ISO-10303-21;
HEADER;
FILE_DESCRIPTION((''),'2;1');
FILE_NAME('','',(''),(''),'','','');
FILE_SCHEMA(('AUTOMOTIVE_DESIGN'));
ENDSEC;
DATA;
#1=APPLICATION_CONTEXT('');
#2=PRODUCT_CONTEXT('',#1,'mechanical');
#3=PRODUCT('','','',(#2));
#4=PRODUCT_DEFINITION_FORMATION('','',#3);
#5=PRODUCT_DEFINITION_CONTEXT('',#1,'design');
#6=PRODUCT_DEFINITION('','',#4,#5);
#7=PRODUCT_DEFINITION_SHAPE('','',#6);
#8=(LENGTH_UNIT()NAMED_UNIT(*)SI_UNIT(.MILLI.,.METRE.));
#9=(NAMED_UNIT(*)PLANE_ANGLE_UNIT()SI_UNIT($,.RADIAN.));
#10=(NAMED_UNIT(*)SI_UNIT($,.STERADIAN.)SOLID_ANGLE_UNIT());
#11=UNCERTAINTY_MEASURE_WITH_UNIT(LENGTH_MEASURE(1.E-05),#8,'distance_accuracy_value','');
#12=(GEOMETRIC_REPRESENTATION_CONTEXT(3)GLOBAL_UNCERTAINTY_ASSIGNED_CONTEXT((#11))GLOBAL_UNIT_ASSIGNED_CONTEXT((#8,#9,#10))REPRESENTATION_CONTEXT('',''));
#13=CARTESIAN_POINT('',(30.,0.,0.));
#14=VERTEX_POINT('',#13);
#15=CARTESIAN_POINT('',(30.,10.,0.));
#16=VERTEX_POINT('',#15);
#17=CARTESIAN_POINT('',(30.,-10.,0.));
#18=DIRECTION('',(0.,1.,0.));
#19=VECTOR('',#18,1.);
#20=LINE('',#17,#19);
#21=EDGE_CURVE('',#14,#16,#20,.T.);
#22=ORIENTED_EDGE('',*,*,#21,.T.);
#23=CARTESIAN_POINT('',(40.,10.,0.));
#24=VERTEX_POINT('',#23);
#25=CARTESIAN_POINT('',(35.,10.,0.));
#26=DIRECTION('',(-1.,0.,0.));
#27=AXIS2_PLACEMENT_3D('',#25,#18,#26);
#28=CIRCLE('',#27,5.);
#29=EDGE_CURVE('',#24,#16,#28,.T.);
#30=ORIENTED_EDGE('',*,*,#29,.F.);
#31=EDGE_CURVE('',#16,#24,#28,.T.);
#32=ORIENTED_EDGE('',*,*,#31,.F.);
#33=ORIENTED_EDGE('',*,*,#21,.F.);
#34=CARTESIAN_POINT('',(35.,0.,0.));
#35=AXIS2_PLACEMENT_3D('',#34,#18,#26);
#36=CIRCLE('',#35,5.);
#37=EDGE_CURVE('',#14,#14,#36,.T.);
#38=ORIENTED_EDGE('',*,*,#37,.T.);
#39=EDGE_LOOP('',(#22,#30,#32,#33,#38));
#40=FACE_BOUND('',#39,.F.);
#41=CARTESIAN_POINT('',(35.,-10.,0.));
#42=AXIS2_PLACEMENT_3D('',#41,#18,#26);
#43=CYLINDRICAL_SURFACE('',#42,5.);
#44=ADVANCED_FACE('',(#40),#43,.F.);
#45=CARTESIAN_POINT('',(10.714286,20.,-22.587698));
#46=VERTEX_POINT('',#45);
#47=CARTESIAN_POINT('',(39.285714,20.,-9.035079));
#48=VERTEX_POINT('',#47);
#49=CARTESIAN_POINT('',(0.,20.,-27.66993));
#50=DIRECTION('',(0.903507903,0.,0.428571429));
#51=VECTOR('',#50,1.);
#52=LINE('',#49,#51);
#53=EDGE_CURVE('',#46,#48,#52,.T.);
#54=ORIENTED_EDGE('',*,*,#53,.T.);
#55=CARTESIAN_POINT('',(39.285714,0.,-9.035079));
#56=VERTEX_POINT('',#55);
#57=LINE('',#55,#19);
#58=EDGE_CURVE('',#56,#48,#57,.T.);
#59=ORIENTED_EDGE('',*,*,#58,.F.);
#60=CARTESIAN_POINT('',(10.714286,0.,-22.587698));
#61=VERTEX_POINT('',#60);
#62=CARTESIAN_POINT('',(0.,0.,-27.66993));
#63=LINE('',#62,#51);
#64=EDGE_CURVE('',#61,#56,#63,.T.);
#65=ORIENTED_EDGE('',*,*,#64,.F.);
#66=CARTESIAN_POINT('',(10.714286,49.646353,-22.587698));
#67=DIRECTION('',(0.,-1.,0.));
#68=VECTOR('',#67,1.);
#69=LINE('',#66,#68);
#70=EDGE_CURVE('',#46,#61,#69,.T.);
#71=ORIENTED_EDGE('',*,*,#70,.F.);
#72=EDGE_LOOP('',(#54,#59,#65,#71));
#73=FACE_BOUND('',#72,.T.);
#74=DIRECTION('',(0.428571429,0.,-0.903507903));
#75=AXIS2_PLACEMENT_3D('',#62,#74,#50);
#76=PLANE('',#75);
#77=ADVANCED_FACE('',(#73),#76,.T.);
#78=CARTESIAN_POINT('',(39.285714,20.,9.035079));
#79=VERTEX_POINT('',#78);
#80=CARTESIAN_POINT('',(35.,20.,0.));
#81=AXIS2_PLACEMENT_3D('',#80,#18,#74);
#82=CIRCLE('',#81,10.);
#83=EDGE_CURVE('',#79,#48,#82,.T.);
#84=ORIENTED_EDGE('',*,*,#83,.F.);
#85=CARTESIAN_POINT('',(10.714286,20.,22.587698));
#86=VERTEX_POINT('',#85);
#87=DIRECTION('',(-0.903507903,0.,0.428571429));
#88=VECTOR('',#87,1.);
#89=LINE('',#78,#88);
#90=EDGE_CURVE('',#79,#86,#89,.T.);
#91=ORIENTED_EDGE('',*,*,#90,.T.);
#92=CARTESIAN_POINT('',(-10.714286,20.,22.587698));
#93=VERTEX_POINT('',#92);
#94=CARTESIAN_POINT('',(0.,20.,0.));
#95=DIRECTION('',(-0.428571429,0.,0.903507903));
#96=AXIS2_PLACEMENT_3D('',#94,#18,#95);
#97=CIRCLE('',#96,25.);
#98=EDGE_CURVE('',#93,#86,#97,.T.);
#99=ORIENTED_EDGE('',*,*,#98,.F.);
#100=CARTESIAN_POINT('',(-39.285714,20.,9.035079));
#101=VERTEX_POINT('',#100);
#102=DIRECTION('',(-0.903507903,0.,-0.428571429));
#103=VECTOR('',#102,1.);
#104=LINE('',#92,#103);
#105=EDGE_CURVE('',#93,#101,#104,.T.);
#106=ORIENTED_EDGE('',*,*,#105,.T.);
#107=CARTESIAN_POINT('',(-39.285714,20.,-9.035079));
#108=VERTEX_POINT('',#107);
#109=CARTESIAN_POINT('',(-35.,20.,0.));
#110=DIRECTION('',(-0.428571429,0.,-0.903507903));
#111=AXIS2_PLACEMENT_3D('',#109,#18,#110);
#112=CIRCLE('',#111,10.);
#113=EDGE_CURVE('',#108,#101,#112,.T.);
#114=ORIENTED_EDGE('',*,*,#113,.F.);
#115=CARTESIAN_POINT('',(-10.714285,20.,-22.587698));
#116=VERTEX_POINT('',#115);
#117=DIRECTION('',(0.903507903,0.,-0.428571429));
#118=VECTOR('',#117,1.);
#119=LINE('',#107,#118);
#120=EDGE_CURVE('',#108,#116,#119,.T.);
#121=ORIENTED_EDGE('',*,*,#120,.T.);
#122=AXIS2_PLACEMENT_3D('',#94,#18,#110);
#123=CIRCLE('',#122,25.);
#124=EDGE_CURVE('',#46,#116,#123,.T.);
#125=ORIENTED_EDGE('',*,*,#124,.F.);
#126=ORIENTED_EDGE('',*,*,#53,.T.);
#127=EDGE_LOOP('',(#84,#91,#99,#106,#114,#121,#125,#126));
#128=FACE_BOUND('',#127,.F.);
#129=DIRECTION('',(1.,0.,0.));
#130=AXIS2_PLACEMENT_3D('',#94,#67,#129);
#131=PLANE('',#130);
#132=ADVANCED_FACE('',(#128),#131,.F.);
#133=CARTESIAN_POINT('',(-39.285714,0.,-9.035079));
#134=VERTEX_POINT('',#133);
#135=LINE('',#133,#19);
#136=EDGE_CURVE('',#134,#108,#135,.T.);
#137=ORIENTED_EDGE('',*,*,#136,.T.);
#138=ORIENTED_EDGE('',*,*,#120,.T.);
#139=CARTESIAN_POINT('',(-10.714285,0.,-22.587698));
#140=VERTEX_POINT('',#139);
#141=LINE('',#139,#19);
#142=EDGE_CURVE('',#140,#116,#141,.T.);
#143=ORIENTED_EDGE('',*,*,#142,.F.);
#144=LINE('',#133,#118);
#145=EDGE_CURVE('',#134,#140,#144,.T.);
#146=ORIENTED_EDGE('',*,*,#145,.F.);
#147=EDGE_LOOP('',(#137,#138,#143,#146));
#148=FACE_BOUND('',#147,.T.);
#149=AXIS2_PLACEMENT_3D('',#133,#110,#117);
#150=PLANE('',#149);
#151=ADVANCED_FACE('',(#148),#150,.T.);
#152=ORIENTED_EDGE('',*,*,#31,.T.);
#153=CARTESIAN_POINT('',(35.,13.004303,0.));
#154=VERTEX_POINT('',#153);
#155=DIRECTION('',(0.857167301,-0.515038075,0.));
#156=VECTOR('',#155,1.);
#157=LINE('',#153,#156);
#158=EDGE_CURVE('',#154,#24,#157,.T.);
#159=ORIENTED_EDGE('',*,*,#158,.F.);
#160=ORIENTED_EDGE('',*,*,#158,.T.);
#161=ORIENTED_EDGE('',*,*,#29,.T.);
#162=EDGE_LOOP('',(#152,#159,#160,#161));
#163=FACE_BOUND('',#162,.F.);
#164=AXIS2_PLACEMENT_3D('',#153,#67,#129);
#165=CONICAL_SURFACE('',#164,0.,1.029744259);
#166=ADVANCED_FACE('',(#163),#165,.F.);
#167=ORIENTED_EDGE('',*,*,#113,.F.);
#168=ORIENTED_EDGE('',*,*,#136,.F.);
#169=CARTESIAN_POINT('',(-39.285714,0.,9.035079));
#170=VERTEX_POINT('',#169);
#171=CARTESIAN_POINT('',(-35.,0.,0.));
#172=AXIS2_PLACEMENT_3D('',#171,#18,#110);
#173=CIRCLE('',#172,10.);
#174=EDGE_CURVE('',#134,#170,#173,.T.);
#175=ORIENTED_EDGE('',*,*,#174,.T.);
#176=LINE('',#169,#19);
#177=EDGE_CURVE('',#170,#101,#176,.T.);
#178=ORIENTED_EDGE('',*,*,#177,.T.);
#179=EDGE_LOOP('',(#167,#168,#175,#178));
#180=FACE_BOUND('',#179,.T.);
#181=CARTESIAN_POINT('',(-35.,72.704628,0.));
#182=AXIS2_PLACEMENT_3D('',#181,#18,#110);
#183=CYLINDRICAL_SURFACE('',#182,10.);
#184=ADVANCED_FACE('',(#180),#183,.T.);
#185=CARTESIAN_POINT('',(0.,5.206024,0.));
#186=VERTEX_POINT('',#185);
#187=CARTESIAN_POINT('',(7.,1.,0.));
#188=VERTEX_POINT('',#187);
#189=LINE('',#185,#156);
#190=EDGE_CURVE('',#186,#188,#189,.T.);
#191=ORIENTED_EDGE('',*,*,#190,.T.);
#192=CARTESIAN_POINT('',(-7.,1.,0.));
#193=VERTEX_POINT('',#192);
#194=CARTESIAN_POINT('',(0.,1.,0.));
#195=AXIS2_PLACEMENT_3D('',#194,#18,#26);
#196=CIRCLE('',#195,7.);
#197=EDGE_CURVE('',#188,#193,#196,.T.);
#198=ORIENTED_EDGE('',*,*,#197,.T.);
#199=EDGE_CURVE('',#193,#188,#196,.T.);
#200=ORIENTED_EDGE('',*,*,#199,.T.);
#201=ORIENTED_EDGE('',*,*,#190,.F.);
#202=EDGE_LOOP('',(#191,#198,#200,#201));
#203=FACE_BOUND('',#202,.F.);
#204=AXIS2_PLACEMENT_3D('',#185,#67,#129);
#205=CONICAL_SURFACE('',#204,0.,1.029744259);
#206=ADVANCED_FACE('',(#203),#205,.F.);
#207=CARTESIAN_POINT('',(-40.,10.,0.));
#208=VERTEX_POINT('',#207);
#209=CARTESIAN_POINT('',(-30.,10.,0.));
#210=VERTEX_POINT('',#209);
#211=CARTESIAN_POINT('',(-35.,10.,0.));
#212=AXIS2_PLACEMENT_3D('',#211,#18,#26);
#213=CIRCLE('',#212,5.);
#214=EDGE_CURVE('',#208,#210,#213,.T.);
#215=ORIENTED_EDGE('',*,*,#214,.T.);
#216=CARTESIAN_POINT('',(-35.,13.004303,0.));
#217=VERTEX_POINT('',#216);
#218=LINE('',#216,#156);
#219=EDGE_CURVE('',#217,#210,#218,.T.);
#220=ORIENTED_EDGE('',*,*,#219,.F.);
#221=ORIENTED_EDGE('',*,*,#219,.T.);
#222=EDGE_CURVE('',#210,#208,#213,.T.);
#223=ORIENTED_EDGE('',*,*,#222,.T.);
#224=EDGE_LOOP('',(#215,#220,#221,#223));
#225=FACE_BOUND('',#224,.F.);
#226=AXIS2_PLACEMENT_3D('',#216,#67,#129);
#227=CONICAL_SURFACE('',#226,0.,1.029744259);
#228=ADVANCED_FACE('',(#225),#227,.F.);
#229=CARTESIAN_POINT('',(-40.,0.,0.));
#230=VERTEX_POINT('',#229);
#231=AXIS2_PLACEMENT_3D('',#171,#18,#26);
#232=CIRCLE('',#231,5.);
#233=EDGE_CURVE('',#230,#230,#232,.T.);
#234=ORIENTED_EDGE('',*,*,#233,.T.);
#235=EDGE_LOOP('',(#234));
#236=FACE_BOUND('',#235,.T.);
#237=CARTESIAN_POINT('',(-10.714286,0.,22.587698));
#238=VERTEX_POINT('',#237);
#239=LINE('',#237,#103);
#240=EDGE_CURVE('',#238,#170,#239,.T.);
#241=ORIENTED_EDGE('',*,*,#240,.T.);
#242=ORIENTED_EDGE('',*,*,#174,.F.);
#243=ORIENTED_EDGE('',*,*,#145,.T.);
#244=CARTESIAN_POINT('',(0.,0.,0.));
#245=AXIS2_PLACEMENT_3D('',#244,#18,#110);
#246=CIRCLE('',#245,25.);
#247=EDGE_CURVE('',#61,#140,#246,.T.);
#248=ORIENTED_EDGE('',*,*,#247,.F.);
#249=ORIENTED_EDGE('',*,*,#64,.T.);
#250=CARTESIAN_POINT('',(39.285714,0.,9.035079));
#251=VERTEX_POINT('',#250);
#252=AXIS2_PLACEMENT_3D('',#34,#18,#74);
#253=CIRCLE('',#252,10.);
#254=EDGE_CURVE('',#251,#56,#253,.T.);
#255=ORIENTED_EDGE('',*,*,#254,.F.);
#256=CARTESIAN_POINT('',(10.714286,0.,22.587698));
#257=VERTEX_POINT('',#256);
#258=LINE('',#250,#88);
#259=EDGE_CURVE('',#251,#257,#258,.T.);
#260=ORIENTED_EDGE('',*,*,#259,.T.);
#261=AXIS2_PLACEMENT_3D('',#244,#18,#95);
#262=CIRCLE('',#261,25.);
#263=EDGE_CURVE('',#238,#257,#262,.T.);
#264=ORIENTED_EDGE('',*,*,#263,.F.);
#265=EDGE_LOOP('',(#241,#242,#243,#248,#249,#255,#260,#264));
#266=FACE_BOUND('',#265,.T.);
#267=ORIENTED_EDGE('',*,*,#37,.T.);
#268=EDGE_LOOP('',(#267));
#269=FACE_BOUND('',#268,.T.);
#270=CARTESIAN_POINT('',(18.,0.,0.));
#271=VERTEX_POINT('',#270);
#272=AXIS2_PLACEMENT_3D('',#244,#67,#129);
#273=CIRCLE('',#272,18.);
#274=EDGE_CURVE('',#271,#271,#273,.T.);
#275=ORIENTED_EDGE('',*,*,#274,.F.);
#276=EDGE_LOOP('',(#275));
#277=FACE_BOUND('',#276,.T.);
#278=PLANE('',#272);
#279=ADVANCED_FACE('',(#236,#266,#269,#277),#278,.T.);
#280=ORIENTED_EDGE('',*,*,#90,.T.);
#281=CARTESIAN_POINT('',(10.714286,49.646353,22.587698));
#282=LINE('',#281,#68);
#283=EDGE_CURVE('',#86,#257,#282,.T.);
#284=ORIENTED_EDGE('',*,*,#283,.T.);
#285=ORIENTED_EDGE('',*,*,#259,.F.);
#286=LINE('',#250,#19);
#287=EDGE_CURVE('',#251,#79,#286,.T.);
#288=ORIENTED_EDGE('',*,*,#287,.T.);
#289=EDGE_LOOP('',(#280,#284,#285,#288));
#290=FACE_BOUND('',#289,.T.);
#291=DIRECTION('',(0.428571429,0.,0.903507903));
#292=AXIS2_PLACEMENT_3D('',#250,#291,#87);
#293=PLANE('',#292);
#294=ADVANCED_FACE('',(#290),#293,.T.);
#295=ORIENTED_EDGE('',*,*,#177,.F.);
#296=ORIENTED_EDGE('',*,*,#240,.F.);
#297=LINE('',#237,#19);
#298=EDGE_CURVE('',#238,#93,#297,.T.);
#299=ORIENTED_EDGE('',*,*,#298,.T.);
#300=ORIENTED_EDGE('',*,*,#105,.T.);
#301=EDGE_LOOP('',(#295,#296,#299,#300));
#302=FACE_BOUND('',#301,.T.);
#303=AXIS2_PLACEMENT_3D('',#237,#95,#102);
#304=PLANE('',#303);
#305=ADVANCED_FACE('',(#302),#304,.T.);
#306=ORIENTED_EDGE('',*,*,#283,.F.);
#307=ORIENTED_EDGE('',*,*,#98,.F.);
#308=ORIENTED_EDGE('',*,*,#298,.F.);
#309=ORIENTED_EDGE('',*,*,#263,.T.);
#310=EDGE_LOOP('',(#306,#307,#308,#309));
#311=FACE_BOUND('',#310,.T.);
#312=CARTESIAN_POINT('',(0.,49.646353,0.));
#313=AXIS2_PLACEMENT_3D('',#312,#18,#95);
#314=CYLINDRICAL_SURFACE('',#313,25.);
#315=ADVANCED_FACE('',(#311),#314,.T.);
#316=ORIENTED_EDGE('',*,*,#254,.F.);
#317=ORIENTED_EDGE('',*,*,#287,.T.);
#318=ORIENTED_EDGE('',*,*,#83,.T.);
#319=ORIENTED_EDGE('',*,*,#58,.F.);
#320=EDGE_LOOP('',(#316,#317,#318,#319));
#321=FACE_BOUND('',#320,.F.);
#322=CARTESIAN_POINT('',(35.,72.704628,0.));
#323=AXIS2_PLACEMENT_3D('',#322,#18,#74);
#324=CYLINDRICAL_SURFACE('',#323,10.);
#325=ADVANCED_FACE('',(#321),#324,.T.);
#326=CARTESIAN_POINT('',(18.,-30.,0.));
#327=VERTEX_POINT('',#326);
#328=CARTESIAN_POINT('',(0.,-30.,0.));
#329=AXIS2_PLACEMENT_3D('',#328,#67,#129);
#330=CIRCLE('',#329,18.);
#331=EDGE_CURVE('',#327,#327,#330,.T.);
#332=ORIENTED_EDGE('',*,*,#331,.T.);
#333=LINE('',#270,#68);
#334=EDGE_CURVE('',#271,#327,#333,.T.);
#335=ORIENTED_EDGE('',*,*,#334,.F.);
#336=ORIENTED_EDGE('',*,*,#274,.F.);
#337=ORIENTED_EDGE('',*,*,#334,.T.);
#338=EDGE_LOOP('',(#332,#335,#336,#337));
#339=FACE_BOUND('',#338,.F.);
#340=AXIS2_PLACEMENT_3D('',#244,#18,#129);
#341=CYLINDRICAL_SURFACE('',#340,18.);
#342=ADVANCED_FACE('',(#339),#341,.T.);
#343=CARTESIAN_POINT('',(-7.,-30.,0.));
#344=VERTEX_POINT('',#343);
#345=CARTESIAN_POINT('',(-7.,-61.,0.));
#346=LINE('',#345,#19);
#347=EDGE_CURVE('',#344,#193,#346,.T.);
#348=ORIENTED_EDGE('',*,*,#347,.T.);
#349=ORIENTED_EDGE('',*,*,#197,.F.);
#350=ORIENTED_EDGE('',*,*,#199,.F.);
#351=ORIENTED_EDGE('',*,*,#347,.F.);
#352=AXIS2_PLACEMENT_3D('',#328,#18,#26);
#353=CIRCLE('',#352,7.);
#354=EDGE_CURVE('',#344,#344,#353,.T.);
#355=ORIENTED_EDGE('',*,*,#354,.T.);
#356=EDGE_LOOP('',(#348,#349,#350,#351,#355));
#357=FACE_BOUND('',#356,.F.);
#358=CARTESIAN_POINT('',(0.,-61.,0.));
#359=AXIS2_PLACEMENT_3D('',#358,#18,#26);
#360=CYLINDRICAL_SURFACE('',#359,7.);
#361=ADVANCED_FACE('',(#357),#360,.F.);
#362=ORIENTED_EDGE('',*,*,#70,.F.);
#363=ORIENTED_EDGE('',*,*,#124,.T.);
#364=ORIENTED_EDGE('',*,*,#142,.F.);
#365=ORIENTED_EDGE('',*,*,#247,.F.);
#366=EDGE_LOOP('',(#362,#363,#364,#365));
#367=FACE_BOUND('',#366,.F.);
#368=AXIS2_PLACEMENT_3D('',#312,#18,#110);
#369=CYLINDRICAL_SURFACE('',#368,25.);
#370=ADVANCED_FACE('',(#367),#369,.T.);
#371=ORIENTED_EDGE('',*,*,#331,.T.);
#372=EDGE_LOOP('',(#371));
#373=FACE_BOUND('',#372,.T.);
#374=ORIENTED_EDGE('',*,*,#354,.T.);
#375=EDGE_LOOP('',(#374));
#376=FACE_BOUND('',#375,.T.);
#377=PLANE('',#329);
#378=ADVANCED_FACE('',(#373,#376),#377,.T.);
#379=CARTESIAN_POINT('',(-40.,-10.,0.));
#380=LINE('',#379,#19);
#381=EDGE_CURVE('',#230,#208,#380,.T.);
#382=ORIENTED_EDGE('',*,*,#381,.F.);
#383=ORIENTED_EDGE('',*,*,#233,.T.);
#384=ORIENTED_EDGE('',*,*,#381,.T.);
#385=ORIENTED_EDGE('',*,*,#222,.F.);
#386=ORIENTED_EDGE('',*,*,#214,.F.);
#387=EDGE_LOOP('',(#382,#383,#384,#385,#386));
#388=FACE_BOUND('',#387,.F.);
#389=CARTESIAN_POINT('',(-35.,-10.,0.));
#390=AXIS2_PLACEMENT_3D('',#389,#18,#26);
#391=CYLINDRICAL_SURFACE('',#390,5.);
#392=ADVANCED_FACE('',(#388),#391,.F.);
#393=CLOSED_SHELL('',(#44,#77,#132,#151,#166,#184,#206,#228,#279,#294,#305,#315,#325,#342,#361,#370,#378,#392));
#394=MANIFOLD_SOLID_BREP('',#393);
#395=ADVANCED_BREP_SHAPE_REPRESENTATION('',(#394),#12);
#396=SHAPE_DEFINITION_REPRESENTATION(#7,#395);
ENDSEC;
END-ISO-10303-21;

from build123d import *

# Parameters (mm, degrees)
F1_DEPTH    = 20
F2_T1_DEPTH = 125.4092553389
F3_D        = 10
F3_DEPTH    = 10
F3_TIP      = 3.0043030951
F4_R        = 18
F5_DEPTH    = 30
F7_D        = 14
F7_DEPTH    = 31
F7_TIP      = 4.2060243332
F8_T1_DEPTH = 79.2927061282


# Not quite as in the source:
# - a fillet or chamfer that OpenCascade refuses, or shapes differently, is made with other operations: its cross-section is extruded or revolved along the edge and cut away or added


with BuildPart() as f1:
    # F0 (on Front) → F1 (new body)
    with BuildSketch(Plane.XZ):
        with BuildLine():
            ThreePointArc((10.7142859294, -22.5876974706), (21.1288564318, -13.363061995), (25, 0))
            ThreePointArc((25, 0), (21.1288563814, 13.3630620747), (10.7142857589, 22.5876975515))
            ThreePointArc((10.7142857589, 22.5876975515), (1.61e-08, 25), (-10.7142857298, 22.5876975653))
            ThreePointArc((-10.7142857298, 22.5876975653), (-21.1288563728, 13.3630620884), (-25, 0))
            ThreePointArc((-25, 0), (-21.1288561313, -13.3630624702), (-10.7142849134, -22.5876979525))
            ThreePointArc((-10.7142849134, -22.5876979525), (5.623e-07, -25), (10.7142859294, -22.5876974706))
        make_face()
        with BuildLine():
            ThreePointArc((-39.2857140137, -9.0350791581), (-45, -4.32e-08), (-39.2857140918, 9.035079121))
            Line((-39.2857140918, 9.035079121), (-58.3333333333, 0))
            Line((-58.3333333333, 0), (-39.2857140137, -9.0350791581))
        make_face()
        with BuildLine():
            ThreePointArc((-25, 0), (-21.1288563728, 13.3630620884), (-10.7142857298, 22.5876975653))
            Line((-10.7142857298, 22.5876975653), (-39.2857140918, 9.035079121))
            ThreePointArc((-39.2857140918, 9.035079121), (-29.6547750711, 8.4515424899), (-25, 0))
        make_face()
        with BuildLine():
            Line((-39.2857140137, -9.0350791581), (-10.7142849134, -22.5876979525))
            ThreePointArc((-10.7142849134, -22.5876979525), (-21.1288561313, -13.3630624702), (-25, 0))
            ThreePointArc((-25, 0), (-29.6547750345, -8.4515424668), (-39.2857140137, -9.0350791581))
        make_face()
        with BuildLine():
            ThreePointArc((-39.2857140137, -9.0350791581), (-29.6547750345, -8.4515424668), (-25, 0))
            ThreePointArc((-25, 0), (-29.6547750711, 8.4515424899), (-39.2857140918, 9.035079121))
            ThreePointArc((-39.2857140918, 9.035079121), (-45, -4.32e-08), (-39.2857140137, -9.0350791581))
        make_face()
        with BuildLine():
            Line((0, -27.6699295265), (10.7142859294, -22.5876974706))
            ThreePointArc((10.7142859294, -22.5876974706), (5.623e-07, -25), (-10.7142849134, -22.5876979525))
            Line((-10.7142849134, -22.5876979525), (0, -27.6699295265))
        make_face()
        with BuildLine():
            ThreePointArc((-10.7142857298, 22.5876975653), (1.61e-08, 25), (10.7142857589, 22.5876975515))
            Line((10.7142857589, 22.5876975515), (0, 27.6699295265))
            Line((0, 27.6699295265), (-10.7142857298, 22.5876975653))
        make_face()
        with BuildLine():
            Line((58.3333333333, 0), (39.2857143013, 9.0350790217))
            ThreePointArc((39.2857143013, 9.0350790217), (43.4515425519, 5.345224831), (45, 0))
            ThreePointArc((45, 0), (43.4515424899, -5.3452249289), (39.2857140918, -9.035079121))
            Line((39.2857140918, -9.035079121), (58.3333333333, 0))
        make_face()
        with BuildLine():
            ThreePointArc((10.7142857589, 22.5876975515), (21.1288563814, 13.3630620747), (25, 0))
            ThreePointArc((25, 0), (29.654775169, 8.4515425519), (39.2857143013, 9.0350790217))
            Line((39.2857143013, 9.0350790217), (10.7142857589, 22.5876975515))
        make_face()
        with BuildLine():
            ThreePointArc((39.2857140918, -9.035079121), (29.6547750711, -8.4515424899), (25, 0))
            ThreePointArc((25, 0), (21.1288564318, -13.363061995), (10.7142859294, -22.5876974706))
            Line((10.7142859294, -22.5876974706), (39.2857140918, -9.035079121))
        make_face()
        with BuildLine():
            ThreePointArc((39.2857143013, 9.0350790217), (29.654775169, 8.4515425519), (25, 0))
            ThreePointArc((25, 0), (29.6547750711, -8.4515424899), (39.2857140918, -9.035079121))
            ThreePointArc((39.2857140918, -9.035079121), (43.4515424899, -5.3452249289), (45, 0))
            ThreePointArc((45, 0), (43.4515425519, 5.345224831), (39.2857143013, 9.0350790217))
        make_face()
    extrude(amount=-F1_DEPTH)

    # F2: fillet of radius 10 on 2 edges, made by hand

    # F2_s2 → F2_t1 (cut)
    with BuildSketch(Plane.XZ.offset(-72.7046276695)):
        with BuildLine():
            ThreePointArc((-39.2857142857, -9.0350790291), (-45, 0), (-39.2857142857, 9.0350790291))
            Line((-39.2857142857, 9.0350790291), (-58.3333333333, 0))
            Line((-58.3333333333, 0), (-39.2857142857, -9.0350790291))
        make_face()
        with BuildLine():
            ThreePointArc((39.2857142857, -9.0350790291), (45, 0), (39.2857142857, 9.0350790291))
            Line((39.2857142857, 9.0350790291), (58.3333333333, 0))
            Line((58.3333333333, 0), (39.2857142857, -9.0350790291))
        make_face()
    extrude(amount=F2_T1_DEPTH, mode=Mode.SUBTRACT)

    # F3
    with Locations(Plane.XZ):
        with Locations((-35, 0), (35, 0)):
            Hole(F3_D / 2, depth=F3_DEPTH)
            with Locations((0, 0, -(F3_DEPTH + F3_TIP / 2))):  # 118° drill point
                Cone(0, F3_D / 2, F3_TIP, mode=Mode.SUBTRACT)

    # F4 (on face) → F5 (join)
    with BuildSketch(Plane.XZ):
        Circle(F4_R)
    extrude(amount=F5_DEPTH)

    # F7
    with Locations(Plane.XZ.offset(30)):
        with Locations((0, 0)):
            Hole(F7_D / 2, depth=F7_DEPTH)
            with Locations((0, 0, -(F7_DEPTH + F7_TIP / 2))):  # 118° drill point
                Cone(0, F7_D / 2, F7_TIP, mode=Mode.SUBTRACT)

    # F8: fillet of radius 25 on 2 edges, made by hand

    # F8_s2 → F8_t1 (cut)
    with BuildSketch(Plane.XZ.offset(-49.6463530641)):
        with BuildLine():
            ThreePointArc((-10.7142857143, 22.5876975726), (0, 25), (10.7142857143, 22.5876975726))
            Line((10.7142857143, 22.5876975726), (0, 27.6699295265))
            Line((0, 27.6699295265), (-10.7142857143, 22.5876975726))
        make_face()
        with BuildLine():
            ThreePointArc((-10.7142857143, -22.5876975726), (0, -25), (10.7142857143, -22.5876975726))
            Line((10.7142857143, -22.5876975726), (0, -27.6699295265))
            Line((0, -27.6699295265), (-10.7142857143, -22.5876975726))
        make_face()
    extrude(amount=F8_T1_DEPTH, mode=Mode.SUBTRACT)


solid = f1.part
